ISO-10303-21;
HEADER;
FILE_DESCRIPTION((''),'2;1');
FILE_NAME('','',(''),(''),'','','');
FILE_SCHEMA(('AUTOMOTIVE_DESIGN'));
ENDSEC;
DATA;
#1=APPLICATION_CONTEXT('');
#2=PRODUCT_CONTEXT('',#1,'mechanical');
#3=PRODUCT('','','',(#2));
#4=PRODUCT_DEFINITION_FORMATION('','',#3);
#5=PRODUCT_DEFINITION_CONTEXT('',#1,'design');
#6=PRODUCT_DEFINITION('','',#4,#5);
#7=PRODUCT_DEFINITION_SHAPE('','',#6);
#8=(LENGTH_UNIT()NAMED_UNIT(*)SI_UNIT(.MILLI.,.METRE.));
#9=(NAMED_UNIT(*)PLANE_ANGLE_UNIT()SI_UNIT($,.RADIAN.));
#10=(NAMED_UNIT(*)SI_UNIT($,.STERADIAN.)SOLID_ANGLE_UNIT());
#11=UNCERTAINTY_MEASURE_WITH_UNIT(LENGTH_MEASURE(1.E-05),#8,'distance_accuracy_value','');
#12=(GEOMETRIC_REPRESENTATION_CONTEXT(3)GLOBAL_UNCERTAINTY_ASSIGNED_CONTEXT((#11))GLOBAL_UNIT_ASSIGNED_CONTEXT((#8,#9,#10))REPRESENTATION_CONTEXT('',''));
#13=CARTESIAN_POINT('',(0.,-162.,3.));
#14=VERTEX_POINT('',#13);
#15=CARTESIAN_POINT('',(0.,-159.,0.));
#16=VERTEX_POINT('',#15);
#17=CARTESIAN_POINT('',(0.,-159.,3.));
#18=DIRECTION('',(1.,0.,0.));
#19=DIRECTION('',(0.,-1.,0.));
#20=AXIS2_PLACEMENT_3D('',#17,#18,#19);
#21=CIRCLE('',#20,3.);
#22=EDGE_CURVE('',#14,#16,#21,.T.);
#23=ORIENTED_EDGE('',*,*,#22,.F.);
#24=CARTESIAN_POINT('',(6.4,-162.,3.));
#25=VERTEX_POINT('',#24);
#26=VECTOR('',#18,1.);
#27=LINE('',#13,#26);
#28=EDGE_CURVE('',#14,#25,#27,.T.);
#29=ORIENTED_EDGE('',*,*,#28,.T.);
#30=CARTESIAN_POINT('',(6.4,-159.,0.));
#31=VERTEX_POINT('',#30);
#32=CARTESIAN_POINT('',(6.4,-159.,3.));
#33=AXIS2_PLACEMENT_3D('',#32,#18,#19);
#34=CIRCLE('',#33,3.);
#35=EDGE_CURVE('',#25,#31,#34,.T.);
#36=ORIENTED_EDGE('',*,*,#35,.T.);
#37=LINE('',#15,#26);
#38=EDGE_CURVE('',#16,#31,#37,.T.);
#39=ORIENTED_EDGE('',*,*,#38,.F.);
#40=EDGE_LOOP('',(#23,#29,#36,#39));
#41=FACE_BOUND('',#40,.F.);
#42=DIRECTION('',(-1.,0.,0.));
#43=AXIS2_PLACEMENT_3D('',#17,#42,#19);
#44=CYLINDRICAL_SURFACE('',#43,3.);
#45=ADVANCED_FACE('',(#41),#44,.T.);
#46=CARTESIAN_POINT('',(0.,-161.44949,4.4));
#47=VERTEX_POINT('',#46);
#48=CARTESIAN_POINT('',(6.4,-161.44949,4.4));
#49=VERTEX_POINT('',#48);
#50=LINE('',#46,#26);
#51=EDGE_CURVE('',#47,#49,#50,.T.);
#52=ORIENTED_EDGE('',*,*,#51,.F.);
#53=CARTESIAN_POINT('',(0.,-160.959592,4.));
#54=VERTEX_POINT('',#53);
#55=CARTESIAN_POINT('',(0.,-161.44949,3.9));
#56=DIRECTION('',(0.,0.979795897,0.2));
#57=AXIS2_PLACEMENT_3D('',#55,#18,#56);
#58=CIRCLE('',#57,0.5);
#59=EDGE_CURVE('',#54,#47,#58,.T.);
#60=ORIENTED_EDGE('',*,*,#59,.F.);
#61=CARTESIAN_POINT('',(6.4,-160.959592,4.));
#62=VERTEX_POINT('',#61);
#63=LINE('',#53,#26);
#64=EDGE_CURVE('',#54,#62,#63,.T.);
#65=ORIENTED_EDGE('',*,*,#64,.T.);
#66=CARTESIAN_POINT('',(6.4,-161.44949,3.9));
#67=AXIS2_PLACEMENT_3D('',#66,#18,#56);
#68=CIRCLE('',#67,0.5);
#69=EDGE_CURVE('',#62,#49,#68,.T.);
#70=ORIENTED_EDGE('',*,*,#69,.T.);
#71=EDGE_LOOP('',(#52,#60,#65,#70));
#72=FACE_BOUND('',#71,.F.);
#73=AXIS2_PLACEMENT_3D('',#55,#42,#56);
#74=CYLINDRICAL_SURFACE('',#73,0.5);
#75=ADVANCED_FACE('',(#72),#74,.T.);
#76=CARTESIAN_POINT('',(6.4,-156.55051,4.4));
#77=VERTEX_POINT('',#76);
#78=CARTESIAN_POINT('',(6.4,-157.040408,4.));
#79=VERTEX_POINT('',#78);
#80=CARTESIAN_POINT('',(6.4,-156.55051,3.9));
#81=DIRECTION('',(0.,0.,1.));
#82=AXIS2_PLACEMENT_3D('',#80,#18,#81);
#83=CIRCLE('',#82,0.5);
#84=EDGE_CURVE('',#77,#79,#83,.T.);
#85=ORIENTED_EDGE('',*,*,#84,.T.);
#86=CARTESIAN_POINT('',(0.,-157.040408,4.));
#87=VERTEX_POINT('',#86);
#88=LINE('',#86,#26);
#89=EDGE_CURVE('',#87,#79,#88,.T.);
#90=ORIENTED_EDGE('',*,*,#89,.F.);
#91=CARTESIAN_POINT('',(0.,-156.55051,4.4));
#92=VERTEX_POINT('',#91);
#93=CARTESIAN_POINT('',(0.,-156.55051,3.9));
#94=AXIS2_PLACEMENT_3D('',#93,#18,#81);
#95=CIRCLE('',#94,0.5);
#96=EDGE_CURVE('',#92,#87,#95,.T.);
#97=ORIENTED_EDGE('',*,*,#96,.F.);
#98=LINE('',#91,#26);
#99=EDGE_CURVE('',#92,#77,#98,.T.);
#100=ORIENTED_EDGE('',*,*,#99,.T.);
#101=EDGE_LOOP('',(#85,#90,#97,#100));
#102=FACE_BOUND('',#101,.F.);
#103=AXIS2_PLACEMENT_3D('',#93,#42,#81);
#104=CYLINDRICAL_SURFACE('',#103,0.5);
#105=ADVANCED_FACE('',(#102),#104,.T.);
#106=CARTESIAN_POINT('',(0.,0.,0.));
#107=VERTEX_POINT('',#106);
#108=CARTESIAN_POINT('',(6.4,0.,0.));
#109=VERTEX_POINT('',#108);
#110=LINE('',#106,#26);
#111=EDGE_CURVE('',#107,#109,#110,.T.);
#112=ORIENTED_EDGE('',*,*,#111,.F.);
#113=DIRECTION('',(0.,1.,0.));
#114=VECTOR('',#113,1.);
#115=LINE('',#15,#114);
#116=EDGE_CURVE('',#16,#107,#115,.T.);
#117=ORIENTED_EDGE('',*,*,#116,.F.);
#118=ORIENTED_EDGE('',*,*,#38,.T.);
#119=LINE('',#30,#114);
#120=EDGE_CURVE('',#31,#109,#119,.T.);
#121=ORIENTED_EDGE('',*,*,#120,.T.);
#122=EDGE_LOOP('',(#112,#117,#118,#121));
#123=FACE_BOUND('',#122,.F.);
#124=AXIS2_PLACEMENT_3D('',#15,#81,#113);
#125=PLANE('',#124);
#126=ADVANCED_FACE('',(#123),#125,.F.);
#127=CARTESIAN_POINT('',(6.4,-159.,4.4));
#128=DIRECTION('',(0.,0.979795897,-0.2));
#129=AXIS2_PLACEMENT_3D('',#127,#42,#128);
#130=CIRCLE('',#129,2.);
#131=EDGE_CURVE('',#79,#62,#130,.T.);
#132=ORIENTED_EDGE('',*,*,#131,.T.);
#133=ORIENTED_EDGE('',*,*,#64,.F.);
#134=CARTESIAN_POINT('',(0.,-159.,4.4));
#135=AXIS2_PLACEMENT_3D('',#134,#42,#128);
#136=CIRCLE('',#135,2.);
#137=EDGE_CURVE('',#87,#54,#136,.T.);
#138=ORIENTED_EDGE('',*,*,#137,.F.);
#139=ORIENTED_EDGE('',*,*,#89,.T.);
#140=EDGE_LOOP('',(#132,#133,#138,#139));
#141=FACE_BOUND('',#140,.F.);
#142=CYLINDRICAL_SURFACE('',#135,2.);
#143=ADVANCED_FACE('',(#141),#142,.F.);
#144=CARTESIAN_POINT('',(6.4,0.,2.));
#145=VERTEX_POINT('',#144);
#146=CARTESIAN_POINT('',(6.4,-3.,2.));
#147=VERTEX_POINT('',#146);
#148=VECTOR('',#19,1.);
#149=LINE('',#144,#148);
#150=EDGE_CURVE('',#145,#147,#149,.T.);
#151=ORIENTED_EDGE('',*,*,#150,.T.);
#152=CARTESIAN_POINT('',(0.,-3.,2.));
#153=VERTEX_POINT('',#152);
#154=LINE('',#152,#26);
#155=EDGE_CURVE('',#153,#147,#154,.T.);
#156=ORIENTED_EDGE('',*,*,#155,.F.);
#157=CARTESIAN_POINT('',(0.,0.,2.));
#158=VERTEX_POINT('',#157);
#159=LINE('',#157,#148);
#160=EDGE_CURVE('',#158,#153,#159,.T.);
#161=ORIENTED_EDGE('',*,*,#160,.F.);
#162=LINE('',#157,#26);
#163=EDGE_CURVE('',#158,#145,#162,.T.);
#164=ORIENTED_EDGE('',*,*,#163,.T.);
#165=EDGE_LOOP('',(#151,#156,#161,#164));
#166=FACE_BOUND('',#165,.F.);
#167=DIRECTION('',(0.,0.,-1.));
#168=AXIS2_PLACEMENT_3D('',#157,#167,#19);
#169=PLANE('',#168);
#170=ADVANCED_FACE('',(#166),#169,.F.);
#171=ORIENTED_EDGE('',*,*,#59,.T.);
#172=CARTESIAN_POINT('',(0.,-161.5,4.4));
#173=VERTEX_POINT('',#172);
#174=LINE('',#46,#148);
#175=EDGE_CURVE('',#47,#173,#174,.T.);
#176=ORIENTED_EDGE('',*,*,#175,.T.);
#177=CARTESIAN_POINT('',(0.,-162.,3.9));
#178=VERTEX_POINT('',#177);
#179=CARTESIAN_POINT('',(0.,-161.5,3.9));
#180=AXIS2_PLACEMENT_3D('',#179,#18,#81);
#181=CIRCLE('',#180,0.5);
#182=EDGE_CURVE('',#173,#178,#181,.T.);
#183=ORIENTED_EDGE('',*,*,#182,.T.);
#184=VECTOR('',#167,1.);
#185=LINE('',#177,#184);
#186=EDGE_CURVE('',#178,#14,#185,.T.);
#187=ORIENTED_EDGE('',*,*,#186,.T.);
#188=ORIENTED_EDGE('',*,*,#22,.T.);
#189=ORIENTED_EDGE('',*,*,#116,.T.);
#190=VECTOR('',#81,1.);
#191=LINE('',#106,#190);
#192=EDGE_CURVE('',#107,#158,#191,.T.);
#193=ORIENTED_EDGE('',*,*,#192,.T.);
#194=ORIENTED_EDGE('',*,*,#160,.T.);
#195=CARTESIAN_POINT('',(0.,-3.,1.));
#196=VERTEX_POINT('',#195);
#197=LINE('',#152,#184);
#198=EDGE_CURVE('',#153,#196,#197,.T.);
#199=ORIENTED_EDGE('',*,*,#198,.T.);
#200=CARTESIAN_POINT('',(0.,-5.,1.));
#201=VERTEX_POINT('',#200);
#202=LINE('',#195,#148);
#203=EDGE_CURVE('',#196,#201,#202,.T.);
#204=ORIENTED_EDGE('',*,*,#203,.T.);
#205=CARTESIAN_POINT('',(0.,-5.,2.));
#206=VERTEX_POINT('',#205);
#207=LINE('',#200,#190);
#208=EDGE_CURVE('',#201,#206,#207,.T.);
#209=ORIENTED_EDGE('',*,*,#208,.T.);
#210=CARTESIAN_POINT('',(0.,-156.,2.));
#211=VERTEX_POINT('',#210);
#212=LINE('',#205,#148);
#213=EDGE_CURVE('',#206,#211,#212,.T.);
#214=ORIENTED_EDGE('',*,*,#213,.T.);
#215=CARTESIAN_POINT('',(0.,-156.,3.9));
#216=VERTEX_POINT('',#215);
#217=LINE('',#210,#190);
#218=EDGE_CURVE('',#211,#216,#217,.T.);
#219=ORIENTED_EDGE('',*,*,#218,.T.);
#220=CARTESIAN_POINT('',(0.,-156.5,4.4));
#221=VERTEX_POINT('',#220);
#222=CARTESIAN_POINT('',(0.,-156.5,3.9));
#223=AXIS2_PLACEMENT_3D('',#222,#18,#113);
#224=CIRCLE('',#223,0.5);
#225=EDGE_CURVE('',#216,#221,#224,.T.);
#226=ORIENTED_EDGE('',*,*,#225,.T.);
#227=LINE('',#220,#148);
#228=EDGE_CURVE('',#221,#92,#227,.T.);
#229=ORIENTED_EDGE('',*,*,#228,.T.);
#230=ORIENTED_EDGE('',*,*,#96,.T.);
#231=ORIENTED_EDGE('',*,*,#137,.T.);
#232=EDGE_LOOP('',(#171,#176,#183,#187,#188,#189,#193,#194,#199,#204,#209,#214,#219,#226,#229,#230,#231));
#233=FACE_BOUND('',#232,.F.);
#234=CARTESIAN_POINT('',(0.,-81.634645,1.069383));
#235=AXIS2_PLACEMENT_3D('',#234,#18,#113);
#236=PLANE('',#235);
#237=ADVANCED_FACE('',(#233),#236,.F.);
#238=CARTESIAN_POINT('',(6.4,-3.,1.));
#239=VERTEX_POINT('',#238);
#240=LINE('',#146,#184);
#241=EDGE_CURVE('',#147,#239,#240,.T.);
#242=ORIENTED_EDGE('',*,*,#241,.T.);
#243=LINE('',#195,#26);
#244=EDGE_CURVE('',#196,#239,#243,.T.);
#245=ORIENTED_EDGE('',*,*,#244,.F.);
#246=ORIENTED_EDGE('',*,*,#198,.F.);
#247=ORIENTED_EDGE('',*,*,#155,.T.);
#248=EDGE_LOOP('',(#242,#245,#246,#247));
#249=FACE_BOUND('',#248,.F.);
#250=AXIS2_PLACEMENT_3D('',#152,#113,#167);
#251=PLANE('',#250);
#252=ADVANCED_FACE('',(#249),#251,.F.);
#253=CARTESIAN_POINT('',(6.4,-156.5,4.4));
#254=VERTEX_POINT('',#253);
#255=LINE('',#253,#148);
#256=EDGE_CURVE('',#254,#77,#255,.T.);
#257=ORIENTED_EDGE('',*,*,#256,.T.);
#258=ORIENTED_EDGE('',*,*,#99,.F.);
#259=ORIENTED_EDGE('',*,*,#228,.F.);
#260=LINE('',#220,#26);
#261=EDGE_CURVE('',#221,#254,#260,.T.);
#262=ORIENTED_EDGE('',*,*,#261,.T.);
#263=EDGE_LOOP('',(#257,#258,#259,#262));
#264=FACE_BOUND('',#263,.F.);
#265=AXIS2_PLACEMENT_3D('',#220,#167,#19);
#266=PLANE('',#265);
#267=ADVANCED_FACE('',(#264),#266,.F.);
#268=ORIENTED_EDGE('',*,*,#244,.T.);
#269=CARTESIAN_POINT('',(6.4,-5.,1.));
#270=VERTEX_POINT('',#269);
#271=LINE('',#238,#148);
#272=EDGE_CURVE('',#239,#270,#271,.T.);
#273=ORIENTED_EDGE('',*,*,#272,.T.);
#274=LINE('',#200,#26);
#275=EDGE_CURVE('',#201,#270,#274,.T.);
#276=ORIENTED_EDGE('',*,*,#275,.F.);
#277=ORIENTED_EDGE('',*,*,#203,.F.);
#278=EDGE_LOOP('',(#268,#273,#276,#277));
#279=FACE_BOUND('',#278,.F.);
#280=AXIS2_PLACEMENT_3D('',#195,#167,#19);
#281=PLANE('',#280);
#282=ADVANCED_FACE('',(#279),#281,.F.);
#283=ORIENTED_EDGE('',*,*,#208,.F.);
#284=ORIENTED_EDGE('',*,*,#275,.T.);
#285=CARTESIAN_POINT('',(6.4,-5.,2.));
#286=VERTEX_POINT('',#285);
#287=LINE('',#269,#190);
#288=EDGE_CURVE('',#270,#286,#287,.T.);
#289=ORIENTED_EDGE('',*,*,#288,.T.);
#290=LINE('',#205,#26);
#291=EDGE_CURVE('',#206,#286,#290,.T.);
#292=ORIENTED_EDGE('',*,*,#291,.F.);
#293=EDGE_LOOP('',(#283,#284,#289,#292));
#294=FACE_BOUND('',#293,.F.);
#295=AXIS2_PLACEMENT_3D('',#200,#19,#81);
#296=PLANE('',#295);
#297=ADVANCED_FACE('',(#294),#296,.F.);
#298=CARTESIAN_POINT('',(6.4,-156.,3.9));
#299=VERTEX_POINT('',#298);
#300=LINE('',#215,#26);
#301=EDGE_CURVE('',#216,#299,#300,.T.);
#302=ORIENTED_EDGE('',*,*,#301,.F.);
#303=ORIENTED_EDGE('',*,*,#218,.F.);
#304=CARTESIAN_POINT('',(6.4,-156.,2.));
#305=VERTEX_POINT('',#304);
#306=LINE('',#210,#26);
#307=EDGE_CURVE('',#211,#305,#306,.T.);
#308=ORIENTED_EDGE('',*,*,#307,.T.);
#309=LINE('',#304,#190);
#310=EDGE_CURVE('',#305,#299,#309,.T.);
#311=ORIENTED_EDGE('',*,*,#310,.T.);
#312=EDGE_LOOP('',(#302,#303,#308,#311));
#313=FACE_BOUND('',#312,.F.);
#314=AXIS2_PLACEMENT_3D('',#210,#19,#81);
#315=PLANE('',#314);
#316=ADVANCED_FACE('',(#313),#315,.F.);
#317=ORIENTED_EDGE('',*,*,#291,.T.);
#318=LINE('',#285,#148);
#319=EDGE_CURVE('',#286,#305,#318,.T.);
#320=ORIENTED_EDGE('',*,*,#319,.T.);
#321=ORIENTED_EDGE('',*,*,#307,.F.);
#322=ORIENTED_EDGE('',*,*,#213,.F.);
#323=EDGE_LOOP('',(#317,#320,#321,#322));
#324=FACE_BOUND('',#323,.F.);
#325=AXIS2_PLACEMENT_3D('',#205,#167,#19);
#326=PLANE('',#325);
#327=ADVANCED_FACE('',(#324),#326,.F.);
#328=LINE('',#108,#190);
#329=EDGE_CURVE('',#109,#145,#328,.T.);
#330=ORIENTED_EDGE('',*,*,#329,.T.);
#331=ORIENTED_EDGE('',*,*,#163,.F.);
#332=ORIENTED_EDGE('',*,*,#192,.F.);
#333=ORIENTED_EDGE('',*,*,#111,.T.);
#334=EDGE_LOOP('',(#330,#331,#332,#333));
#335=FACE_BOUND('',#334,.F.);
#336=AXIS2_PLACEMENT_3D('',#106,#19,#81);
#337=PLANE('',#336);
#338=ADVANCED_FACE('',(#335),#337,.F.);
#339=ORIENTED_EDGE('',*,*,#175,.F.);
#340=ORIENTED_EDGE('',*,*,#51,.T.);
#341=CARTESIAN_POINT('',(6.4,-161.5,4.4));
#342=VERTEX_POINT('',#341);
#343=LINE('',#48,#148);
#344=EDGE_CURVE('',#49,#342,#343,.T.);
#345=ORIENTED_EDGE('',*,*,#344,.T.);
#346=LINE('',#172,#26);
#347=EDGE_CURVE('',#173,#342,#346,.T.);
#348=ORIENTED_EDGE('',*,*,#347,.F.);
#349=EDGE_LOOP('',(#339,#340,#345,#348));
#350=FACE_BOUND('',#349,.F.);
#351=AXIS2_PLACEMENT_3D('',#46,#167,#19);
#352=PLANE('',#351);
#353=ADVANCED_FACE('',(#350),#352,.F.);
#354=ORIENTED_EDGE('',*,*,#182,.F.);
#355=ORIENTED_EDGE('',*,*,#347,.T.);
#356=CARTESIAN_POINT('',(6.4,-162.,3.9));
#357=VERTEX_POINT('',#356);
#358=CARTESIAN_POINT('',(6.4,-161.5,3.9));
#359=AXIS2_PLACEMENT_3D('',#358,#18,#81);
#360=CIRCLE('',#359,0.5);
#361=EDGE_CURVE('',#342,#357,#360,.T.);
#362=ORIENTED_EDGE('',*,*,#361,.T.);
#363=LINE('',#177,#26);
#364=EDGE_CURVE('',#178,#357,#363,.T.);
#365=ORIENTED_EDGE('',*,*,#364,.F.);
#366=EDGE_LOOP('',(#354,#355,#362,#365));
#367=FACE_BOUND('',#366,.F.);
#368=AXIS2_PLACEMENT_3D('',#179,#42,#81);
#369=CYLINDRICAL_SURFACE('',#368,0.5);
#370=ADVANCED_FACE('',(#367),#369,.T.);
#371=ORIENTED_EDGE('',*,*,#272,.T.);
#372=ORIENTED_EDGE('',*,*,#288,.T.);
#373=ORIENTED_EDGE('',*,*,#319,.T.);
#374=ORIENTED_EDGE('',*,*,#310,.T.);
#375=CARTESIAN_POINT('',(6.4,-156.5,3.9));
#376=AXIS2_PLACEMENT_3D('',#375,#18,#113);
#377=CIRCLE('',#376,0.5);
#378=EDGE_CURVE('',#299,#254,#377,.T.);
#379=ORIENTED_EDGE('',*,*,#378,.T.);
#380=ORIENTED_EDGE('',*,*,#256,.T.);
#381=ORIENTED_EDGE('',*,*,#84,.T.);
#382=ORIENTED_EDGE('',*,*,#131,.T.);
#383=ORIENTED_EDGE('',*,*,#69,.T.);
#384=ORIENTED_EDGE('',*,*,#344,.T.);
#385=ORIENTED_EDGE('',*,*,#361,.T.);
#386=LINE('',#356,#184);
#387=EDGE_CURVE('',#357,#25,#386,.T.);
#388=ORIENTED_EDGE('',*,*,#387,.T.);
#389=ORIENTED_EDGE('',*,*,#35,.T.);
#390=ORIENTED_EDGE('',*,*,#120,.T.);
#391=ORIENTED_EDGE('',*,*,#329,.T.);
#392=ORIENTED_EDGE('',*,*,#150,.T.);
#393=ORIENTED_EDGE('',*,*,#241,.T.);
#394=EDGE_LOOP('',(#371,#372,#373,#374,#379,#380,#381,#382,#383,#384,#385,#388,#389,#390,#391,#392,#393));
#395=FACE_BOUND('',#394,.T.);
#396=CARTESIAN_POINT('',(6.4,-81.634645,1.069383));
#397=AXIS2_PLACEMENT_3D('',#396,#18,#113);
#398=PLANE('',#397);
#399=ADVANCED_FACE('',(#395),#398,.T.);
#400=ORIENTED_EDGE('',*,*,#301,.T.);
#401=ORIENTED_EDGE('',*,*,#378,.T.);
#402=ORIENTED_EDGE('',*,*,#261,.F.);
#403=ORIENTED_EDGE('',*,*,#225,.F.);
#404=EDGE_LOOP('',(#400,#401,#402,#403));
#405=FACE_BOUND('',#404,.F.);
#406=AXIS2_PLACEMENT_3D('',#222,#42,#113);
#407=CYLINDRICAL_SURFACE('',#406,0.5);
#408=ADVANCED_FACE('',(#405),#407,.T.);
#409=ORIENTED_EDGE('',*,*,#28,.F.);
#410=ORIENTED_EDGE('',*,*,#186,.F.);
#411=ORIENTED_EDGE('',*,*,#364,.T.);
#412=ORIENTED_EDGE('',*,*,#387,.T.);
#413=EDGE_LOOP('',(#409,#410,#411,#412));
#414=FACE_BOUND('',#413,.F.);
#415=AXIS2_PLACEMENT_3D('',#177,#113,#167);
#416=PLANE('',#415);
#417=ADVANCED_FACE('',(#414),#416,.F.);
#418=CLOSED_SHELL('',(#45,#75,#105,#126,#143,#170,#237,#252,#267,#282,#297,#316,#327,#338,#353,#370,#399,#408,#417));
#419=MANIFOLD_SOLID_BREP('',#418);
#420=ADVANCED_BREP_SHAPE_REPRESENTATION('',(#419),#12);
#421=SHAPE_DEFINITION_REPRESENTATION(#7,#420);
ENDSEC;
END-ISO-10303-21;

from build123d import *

# Parameters (mm, degrees)
F1_DEPTH = 6.4


# Not quite as in the source:
# - a feature names something its author has since deleted; it is built from what else it names


with BuildPart() as f1:
    # F0 (on Right) → F1 (new body)
    with BuildSketch(Plane.YZ):
        with BuildLine():
            Line((-159, 0), (0, 0))
            Line((0, 0), (0, 2))
            Line((0, 2), (-3, 2))
            Line((-3, 2), (-3, 1))
            Line((-3, 1), (-5, 1))
            Line((-5, 1), (-5, 2))
            Line((-5, 2), (-156, 2))
            Line((-156, 2), (-156, 3.9))
            ThreePointArc((-156, 3.9), (-156.1464466094, 4.2535533906), (-156.5, 4.4))
            Line((-156.5, 4.4), (-156.5505102572, 4.4))
            ThreePointArc((-156.5505102572, 4.4), (-156.8667380232, 4.2872983346), (-157.0404082058, 4))
            ThreePointArc((-157.0404082058, 4), (-159, 2.4), (-160.9595917942, 4))
            ThreePointArc((-160.9595917942, 4), (-161.1332619768, 4.2872983346), (-161.4494897428, 4.4))
            Line((-161.4494897428, 4.4), (-161.5, 4.4))
            ThreePointArc((-161.5, 4.4), (-161.8535533906, 4.2535533906), (-162, 3.9))
            Line((-162, 3.9), (-162, 3))
            ThreePointArc((-162, 3), (-161.1213203436, 0.8786796564), (-159, 0))
        make_face()
    extrude(amount=F1_DEPTH)


solid = f1.part
